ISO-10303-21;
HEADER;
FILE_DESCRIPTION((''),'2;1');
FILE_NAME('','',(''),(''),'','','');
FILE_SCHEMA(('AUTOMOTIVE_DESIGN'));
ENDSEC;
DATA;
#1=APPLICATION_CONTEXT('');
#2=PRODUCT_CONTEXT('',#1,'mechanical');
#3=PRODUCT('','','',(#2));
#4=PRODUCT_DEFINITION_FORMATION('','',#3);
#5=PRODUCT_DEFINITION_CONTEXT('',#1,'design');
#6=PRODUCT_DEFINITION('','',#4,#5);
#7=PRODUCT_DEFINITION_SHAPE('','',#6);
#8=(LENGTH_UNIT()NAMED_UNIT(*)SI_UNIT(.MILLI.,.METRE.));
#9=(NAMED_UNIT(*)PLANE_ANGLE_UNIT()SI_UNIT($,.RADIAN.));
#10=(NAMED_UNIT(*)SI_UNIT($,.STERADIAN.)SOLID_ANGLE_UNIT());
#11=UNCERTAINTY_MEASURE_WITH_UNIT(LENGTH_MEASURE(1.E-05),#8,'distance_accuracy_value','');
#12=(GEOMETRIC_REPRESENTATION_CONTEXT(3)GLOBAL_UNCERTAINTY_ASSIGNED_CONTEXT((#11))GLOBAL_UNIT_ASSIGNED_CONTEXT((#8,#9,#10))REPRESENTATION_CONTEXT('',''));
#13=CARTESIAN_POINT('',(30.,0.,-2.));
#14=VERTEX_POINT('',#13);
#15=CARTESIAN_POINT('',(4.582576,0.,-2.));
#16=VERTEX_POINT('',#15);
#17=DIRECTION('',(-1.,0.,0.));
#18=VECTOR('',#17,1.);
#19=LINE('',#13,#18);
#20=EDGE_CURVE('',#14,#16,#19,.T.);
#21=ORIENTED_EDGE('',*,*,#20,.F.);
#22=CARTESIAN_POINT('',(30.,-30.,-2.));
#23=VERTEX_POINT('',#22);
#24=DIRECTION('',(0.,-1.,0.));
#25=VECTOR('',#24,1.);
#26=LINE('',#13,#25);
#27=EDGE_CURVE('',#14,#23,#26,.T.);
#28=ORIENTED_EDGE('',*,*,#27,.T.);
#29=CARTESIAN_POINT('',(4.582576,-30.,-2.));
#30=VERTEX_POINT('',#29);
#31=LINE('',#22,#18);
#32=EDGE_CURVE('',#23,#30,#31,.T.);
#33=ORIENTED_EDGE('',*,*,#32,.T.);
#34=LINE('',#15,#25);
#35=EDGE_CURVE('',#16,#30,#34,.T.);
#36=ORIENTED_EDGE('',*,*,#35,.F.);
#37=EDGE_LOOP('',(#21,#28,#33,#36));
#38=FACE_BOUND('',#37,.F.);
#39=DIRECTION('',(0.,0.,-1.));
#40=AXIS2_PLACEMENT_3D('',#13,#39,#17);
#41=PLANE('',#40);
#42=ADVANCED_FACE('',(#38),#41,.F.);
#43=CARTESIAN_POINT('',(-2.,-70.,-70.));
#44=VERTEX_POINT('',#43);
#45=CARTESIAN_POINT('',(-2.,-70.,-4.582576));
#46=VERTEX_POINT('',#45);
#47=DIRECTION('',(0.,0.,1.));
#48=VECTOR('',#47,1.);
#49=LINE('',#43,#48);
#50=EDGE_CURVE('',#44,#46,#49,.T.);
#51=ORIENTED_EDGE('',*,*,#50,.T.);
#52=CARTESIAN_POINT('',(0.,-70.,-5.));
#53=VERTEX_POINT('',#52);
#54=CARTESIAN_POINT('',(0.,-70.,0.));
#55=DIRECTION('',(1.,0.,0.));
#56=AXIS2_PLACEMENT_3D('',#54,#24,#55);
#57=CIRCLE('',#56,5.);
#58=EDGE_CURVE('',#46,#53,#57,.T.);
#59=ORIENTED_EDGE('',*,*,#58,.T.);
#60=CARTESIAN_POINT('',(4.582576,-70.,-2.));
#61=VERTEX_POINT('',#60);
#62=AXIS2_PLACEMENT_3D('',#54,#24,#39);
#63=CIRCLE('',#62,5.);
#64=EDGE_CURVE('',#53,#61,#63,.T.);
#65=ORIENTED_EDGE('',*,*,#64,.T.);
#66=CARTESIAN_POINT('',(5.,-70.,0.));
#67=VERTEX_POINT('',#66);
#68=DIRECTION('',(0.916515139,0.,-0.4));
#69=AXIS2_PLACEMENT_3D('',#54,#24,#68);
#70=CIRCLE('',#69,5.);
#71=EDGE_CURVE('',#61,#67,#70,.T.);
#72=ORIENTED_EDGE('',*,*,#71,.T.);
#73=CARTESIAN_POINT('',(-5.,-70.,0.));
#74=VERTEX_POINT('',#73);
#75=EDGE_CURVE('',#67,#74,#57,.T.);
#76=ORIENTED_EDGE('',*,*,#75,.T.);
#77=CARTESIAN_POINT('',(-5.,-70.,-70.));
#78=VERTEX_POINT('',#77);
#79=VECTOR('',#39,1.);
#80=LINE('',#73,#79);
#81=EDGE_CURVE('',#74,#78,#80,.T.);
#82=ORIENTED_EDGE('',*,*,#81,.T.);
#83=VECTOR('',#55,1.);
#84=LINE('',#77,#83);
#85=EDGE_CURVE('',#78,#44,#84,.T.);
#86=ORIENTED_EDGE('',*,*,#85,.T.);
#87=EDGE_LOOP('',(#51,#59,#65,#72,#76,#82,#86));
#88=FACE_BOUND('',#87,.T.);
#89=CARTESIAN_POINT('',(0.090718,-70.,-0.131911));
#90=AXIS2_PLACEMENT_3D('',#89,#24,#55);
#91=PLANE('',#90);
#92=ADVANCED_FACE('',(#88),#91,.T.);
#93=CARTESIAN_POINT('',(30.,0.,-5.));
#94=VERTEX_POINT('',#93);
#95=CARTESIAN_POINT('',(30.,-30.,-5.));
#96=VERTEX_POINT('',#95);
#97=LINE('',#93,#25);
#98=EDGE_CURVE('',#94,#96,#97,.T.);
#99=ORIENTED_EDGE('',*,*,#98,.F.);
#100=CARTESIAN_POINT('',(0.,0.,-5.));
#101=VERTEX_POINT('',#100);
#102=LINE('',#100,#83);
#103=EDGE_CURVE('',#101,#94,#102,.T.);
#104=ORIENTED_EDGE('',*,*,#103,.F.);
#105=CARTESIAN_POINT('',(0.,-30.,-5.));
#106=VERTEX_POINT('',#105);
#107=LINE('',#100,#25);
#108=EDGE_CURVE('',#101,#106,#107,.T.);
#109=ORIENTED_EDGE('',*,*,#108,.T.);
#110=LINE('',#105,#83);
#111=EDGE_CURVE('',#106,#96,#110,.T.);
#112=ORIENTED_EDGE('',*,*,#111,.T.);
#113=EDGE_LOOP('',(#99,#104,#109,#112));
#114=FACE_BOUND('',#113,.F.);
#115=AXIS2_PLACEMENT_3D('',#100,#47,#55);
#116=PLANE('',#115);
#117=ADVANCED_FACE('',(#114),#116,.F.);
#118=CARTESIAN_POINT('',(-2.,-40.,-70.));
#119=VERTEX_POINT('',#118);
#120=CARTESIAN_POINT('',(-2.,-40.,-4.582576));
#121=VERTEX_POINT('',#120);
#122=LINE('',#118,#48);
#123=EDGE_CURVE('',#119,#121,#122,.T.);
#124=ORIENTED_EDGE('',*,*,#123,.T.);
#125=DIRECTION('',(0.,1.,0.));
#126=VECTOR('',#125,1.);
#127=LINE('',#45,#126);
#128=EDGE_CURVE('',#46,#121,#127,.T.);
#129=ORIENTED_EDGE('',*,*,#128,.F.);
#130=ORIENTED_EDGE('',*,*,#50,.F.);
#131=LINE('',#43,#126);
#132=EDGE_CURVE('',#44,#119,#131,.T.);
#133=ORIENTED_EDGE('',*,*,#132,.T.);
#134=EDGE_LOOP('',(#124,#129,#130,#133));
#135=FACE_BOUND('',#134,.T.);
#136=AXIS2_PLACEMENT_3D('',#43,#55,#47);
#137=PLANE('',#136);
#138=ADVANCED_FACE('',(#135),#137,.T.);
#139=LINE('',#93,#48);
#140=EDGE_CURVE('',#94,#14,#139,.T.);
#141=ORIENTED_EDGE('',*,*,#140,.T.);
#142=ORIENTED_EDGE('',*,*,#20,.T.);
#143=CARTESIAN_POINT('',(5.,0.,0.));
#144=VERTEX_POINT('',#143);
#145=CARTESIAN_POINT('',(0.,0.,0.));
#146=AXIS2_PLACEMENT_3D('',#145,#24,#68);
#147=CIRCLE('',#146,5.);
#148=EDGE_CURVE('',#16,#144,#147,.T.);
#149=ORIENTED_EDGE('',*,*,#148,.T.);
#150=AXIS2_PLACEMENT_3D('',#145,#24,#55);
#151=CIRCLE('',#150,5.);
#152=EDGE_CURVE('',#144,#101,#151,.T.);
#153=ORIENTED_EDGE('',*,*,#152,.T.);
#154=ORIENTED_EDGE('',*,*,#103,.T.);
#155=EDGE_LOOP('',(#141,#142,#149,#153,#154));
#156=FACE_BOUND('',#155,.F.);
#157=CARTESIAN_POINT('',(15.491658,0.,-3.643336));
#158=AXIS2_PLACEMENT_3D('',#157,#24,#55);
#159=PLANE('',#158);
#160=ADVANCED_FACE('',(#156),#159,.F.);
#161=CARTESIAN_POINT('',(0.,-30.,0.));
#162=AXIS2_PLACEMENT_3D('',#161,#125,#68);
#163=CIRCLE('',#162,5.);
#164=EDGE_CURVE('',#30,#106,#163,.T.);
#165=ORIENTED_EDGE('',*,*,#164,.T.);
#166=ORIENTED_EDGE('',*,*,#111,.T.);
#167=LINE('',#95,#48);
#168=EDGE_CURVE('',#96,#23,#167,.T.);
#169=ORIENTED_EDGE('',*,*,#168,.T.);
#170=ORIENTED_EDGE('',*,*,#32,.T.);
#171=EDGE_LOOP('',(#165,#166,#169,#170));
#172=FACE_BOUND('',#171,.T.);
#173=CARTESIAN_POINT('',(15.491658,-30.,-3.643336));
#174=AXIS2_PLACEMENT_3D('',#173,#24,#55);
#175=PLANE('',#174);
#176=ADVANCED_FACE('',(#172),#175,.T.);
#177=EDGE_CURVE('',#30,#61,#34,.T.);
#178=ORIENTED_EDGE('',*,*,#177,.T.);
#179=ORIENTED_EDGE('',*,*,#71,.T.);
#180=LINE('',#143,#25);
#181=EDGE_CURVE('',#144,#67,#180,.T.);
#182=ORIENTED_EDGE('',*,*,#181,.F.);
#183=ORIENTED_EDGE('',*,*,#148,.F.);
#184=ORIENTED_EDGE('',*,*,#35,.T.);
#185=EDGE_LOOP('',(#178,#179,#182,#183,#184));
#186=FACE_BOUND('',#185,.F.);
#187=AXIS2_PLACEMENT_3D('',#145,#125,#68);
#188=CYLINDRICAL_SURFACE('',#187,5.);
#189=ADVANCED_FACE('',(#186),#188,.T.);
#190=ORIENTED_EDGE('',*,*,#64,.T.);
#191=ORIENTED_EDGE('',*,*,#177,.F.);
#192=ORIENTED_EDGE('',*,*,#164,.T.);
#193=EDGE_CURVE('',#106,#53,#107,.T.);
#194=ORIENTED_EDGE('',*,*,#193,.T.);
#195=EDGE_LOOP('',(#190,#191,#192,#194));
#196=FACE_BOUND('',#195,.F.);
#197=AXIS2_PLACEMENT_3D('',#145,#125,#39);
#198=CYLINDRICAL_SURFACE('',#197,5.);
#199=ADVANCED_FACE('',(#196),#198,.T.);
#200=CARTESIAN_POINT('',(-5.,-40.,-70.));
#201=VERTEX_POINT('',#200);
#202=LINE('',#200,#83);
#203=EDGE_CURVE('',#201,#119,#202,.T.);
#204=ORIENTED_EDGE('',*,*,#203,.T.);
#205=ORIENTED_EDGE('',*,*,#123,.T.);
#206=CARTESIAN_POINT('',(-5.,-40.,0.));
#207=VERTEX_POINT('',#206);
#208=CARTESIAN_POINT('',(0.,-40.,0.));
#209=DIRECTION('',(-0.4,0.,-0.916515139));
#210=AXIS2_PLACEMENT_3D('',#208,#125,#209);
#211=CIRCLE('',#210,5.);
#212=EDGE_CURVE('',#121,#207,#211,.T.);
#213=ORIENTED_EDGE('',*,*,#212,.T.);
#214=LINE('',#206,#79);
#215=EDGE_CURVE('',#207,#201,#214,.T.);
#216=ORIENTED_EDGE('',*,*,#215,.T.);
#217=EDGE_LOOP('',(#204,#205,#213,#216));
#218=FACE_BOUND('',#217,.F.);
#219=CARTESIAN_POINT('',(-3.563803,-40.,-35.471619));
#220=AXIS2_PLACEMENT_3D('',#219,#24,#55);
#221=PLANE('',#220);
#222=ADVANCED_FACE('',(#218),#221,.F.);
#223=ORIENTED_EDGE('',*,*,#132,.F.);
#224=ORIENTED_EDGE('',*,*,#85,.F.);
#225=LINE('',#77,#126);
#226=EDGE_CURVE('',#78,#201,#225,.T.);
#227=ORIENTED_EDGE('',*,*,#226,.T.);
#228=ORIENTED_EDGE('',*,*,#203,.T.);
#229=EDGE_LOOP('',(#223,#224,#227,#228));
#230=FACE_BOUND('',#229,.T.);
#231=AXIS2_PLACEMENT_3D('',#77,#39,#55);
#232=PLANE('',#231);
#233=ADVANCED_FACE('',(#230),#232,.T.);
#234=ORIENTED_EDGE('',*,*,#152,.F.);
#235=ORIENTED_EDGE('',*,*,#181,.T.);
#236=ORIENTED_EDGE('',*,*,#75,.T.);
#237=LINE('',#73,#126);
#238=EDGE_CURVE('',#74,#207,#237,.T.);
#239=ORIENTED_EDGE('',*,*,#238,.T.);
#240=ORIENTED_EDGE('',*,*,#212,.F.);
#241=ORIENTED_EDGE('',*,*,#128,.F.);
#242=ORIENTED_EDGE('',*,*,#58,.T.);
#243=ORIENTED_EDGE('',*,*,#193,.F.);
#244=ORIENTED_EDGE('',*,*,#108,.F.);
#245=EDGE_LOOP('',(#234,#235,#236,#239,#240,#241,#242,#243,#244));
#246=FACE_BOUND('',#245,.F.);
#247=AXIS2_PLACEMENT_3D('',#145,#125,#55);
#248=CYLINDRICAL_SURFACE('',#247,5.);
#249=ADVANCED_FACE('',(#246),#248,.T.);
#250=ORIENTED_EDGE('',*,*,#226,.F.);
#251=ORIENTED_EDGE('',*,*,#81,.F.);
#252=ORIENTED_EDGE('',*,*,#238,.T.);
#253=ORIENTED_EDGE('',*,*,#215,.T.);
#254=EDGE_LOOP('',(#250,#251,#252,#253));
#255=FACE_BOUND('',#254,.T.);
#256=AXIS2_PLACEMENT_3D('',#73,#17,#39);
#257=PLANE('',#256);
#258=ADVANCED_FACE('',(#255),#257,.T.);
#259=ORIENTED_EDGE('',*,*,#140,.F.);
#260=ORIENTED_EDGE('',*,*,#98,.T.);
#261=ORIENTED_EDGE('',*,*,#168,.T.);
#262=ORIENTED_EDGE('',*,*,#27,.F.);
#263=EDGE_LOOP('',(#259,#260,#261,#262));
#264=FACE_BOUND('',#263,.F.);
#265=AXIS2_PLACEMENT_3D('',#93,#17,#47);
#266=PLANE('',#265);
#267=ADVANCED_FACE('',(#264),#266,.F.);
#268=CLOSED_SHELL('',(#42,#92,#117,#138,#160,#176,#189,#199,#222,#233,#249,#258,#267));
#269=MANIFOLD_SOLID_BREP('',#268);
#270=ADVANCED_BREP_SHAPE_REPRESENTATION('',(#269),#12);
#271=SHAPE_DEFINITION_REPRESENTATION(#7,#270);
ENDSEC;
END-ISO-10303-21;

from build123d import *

# Parameters (mm, degrees)
F1_DEPTH = 70
F2_DEPTH = 30
F4_DEPTH = 30


# Not quite as in the source:
# - a feature names something its author has since deleted; it is built from what else it names


with BuildPart() as f1:
    # F0 (on Front) → F1 (new body)
    with BuildSketch(Plane.XZ):
        with BuildLine():
            ThreePointArc((4.582575695, -2), (4.8945315647, -1.0215482184), (5, 0))
            ThreePointArc((5, 0), (-3.5355339059, 3.5355339059), (0, -5))
            Line((0, -5), (0, -2))
            Line((0, -2), (4.582575695, -2))
        make_face()
        with BuildLine():
            Line((0, -2), (0, -5))
            ThreePointArc((0, -5), (2.7386127875, -4.1833001327), (4.582575695, -2))
            Line((4.582575695, -2), (0, -2))
        make_face()
    extrude(amount=F1_DEPTH)

    # F0 (on Front) → F2 (join)
    with BuildSketch(Plane.XZ):
        with BuildLine():
            ThreePointArc((4.582575695, -2), (2.7386127875, -4.1833001327), (0, -5))
            Line((0, -5), (30, -5))
            Line((30, -5), (30, -2))
            Line((30, -2), (4.582575695, -2))
        make_face()
    extrude(amount=F2_DEPTH)

    # F3 (on face) → F4 (join)
    with BuildSketch(Plane.XZ.offset(70)):
        with BuildLine():
            Line((-2, -70), (-2, -4.582575695))
            ThreePointArc((-2, -4.582575695), (-4.1833001327, -2.7386127875), (-5, 0))
            Line((-5, 0), (-5, -70))
            Line((-5, -70), (-2, -70))
        make_face()
    extrude(amount=-F4_DEPTH)


solid = f1.part
